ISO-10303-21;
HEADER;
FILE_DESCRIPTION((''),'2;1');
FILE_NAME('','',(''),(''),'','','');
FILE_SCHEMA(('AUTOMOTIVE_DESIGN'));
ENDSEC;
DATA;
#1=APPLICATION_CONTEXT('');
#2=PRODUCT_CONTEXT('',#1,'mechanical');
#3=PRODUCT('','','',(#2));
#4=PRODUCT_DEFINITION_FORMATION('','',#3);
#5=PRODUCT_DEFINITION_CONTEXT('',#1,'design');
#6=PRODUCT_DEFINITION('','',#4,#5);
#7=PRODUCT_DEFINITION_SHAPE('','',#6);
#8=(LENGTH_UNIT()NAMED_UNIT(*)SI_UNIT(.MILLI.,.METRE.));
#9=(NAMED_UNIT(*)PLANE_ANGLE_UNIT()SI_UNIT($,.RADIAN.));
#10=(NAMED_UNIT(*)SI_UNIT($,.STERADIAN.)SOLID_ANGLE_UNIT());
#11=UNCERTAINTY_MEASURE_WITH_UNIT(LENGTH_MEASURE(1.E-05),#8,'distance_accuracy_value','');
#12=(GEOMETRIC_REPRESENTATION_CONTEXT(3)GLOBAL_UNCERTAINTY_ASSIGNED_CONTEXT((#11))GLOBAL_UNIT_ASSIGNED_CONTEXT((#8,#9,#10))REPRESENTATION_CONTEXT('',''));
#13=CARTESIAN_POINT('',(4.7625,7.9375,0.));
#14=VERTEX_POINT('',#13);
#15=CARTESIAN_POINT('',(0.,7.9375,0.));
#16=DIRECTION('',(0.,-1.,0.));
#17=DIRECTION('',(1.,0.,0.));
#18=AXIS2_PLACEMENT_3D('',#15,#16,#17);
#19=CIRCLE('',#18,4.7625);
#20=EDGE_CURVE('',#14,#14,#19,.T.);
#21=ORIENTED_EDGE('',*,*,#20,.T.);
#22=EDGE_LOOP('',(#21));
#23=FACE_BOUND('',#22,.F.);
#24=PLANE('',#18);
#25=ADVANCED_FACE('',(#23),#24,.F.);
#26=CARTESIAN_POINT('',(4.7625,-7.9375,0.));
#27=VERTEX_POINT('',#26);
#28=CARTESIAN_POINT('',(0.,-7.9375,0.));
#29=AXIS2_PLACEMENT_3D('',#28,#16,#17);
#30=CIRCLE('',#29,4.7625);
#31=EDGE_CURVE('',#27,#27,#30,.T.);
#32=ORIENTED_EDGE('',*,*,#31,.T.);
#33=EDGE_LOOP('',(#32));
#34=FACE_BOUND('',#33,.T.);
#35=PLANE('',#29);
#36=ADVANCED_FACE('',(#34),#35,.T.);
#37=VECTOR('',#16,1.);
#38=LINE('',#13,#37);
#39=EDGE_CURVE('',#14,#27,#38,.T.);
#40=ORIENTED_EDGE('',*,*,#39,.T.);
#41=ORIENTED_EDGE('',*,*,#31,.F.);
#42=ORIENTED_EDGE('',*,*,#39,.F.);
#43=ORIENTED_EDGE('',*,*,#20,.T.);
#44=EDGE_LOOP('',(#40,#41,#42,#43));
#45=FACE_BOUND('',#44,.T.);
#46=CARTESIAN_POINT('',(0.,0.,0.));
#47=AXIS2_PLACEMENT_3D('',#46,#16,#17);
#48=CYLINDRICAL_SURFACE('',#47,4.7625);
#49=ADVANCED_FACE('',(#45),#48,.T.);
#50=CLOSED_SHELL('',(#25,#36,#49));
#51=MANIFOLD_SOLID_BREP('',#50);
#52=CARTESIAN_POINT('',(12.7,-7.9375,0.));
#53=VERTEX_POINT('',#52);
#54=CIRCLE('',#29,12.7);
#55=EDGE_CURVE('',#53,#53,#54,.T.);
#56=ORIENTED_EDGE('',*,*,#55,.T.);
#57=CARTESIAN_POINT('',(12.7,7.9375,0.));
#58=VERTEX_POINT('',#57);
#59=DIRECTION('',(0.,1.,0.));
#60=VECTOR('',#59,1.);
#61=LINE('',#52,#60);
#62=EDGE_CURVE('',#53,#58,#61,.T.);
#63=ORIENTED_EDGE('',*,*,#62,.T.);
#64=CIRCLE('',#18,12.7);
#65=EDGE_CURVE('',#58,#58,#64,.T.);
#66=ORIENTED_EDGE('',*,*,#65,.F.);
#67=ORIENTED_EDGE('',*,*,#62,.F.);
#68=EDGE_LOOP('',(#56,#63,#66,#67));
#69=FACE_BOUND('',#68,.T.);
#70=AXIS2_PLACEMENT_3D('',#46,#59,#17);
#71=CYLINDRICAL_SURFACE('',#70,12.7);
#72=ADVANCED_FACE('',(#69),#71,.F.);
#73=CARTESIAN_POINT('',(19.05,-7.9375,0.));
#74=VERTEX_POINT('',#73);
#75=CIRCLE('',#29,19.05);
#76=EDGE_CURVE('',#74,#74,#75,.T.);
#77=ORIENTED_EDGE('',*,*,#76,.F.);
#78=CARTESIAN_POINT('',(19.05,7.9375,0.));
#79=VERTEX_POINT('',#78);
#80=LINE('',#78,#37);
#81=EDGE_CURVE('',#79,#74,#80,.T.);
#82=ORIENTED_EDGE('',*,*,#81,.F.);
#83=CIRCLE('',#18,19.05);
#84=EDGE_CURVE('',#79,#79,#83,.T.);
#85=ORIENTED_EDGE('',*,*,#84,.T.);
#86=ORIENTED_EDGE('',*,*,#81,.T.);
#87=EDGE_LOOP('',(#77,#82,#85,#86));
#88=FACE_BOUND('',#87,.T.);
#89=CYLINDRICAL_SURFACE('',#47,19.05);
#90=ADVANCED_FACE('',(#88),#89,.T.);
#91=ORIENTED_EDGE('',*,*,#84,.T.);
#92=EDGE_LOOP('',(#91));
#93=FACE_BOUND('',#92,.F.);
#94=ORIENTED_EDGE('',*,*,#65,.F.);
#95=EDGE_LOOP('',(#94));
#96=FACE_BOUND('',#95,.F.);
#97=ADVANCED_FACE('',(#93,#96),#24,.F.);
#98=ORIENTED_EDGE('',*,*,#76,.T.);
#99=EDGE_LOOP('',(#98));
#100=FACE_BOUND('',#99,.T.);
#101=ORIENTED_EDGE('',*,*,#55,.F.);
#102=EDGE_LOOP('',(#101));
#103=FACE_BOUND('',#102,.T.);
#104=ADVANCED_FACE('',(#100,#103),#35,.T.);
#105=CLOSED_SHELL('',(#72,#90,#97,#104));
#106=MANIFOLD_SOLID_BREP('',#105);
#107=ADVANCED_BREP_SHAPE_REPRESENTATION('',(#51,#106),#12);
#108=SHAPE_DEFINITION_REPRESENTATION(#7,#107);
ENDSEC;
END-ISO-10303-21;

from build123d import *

# Parameters (mm, degrees)
F0_R     = 19.05
F0_R_2   = 12.7
F1_DEPTH = 7.9375
F0_R_3   = 4.7625


# Not quite as in the source:
# - a length typed as a fraction of an inch, garbled in the dataset ("3 / 203.2 mm" for 3/8 in), is restored


with BuildPart() as f1:
    # F0 (on Front) → F1 (new body, symmetric)
    with BuildSketch(Plane.XZ):
        Circle(F0_R)
        Circle(F0_R_2, mode=Mode.SUBTRACT)
    extrude(amount=F1_DEPTH, both=True)


with BuildPart() as f1b:
    # F0 (on Front) → F1, piece 2 (new body, symmetric)
    with BuildSketch(Plane.XZ):
        Circle(F0_R_3)
    extrude(amount=F1_DEPTH, both=True)


solid = Compound([f1.part, f1b.part])
